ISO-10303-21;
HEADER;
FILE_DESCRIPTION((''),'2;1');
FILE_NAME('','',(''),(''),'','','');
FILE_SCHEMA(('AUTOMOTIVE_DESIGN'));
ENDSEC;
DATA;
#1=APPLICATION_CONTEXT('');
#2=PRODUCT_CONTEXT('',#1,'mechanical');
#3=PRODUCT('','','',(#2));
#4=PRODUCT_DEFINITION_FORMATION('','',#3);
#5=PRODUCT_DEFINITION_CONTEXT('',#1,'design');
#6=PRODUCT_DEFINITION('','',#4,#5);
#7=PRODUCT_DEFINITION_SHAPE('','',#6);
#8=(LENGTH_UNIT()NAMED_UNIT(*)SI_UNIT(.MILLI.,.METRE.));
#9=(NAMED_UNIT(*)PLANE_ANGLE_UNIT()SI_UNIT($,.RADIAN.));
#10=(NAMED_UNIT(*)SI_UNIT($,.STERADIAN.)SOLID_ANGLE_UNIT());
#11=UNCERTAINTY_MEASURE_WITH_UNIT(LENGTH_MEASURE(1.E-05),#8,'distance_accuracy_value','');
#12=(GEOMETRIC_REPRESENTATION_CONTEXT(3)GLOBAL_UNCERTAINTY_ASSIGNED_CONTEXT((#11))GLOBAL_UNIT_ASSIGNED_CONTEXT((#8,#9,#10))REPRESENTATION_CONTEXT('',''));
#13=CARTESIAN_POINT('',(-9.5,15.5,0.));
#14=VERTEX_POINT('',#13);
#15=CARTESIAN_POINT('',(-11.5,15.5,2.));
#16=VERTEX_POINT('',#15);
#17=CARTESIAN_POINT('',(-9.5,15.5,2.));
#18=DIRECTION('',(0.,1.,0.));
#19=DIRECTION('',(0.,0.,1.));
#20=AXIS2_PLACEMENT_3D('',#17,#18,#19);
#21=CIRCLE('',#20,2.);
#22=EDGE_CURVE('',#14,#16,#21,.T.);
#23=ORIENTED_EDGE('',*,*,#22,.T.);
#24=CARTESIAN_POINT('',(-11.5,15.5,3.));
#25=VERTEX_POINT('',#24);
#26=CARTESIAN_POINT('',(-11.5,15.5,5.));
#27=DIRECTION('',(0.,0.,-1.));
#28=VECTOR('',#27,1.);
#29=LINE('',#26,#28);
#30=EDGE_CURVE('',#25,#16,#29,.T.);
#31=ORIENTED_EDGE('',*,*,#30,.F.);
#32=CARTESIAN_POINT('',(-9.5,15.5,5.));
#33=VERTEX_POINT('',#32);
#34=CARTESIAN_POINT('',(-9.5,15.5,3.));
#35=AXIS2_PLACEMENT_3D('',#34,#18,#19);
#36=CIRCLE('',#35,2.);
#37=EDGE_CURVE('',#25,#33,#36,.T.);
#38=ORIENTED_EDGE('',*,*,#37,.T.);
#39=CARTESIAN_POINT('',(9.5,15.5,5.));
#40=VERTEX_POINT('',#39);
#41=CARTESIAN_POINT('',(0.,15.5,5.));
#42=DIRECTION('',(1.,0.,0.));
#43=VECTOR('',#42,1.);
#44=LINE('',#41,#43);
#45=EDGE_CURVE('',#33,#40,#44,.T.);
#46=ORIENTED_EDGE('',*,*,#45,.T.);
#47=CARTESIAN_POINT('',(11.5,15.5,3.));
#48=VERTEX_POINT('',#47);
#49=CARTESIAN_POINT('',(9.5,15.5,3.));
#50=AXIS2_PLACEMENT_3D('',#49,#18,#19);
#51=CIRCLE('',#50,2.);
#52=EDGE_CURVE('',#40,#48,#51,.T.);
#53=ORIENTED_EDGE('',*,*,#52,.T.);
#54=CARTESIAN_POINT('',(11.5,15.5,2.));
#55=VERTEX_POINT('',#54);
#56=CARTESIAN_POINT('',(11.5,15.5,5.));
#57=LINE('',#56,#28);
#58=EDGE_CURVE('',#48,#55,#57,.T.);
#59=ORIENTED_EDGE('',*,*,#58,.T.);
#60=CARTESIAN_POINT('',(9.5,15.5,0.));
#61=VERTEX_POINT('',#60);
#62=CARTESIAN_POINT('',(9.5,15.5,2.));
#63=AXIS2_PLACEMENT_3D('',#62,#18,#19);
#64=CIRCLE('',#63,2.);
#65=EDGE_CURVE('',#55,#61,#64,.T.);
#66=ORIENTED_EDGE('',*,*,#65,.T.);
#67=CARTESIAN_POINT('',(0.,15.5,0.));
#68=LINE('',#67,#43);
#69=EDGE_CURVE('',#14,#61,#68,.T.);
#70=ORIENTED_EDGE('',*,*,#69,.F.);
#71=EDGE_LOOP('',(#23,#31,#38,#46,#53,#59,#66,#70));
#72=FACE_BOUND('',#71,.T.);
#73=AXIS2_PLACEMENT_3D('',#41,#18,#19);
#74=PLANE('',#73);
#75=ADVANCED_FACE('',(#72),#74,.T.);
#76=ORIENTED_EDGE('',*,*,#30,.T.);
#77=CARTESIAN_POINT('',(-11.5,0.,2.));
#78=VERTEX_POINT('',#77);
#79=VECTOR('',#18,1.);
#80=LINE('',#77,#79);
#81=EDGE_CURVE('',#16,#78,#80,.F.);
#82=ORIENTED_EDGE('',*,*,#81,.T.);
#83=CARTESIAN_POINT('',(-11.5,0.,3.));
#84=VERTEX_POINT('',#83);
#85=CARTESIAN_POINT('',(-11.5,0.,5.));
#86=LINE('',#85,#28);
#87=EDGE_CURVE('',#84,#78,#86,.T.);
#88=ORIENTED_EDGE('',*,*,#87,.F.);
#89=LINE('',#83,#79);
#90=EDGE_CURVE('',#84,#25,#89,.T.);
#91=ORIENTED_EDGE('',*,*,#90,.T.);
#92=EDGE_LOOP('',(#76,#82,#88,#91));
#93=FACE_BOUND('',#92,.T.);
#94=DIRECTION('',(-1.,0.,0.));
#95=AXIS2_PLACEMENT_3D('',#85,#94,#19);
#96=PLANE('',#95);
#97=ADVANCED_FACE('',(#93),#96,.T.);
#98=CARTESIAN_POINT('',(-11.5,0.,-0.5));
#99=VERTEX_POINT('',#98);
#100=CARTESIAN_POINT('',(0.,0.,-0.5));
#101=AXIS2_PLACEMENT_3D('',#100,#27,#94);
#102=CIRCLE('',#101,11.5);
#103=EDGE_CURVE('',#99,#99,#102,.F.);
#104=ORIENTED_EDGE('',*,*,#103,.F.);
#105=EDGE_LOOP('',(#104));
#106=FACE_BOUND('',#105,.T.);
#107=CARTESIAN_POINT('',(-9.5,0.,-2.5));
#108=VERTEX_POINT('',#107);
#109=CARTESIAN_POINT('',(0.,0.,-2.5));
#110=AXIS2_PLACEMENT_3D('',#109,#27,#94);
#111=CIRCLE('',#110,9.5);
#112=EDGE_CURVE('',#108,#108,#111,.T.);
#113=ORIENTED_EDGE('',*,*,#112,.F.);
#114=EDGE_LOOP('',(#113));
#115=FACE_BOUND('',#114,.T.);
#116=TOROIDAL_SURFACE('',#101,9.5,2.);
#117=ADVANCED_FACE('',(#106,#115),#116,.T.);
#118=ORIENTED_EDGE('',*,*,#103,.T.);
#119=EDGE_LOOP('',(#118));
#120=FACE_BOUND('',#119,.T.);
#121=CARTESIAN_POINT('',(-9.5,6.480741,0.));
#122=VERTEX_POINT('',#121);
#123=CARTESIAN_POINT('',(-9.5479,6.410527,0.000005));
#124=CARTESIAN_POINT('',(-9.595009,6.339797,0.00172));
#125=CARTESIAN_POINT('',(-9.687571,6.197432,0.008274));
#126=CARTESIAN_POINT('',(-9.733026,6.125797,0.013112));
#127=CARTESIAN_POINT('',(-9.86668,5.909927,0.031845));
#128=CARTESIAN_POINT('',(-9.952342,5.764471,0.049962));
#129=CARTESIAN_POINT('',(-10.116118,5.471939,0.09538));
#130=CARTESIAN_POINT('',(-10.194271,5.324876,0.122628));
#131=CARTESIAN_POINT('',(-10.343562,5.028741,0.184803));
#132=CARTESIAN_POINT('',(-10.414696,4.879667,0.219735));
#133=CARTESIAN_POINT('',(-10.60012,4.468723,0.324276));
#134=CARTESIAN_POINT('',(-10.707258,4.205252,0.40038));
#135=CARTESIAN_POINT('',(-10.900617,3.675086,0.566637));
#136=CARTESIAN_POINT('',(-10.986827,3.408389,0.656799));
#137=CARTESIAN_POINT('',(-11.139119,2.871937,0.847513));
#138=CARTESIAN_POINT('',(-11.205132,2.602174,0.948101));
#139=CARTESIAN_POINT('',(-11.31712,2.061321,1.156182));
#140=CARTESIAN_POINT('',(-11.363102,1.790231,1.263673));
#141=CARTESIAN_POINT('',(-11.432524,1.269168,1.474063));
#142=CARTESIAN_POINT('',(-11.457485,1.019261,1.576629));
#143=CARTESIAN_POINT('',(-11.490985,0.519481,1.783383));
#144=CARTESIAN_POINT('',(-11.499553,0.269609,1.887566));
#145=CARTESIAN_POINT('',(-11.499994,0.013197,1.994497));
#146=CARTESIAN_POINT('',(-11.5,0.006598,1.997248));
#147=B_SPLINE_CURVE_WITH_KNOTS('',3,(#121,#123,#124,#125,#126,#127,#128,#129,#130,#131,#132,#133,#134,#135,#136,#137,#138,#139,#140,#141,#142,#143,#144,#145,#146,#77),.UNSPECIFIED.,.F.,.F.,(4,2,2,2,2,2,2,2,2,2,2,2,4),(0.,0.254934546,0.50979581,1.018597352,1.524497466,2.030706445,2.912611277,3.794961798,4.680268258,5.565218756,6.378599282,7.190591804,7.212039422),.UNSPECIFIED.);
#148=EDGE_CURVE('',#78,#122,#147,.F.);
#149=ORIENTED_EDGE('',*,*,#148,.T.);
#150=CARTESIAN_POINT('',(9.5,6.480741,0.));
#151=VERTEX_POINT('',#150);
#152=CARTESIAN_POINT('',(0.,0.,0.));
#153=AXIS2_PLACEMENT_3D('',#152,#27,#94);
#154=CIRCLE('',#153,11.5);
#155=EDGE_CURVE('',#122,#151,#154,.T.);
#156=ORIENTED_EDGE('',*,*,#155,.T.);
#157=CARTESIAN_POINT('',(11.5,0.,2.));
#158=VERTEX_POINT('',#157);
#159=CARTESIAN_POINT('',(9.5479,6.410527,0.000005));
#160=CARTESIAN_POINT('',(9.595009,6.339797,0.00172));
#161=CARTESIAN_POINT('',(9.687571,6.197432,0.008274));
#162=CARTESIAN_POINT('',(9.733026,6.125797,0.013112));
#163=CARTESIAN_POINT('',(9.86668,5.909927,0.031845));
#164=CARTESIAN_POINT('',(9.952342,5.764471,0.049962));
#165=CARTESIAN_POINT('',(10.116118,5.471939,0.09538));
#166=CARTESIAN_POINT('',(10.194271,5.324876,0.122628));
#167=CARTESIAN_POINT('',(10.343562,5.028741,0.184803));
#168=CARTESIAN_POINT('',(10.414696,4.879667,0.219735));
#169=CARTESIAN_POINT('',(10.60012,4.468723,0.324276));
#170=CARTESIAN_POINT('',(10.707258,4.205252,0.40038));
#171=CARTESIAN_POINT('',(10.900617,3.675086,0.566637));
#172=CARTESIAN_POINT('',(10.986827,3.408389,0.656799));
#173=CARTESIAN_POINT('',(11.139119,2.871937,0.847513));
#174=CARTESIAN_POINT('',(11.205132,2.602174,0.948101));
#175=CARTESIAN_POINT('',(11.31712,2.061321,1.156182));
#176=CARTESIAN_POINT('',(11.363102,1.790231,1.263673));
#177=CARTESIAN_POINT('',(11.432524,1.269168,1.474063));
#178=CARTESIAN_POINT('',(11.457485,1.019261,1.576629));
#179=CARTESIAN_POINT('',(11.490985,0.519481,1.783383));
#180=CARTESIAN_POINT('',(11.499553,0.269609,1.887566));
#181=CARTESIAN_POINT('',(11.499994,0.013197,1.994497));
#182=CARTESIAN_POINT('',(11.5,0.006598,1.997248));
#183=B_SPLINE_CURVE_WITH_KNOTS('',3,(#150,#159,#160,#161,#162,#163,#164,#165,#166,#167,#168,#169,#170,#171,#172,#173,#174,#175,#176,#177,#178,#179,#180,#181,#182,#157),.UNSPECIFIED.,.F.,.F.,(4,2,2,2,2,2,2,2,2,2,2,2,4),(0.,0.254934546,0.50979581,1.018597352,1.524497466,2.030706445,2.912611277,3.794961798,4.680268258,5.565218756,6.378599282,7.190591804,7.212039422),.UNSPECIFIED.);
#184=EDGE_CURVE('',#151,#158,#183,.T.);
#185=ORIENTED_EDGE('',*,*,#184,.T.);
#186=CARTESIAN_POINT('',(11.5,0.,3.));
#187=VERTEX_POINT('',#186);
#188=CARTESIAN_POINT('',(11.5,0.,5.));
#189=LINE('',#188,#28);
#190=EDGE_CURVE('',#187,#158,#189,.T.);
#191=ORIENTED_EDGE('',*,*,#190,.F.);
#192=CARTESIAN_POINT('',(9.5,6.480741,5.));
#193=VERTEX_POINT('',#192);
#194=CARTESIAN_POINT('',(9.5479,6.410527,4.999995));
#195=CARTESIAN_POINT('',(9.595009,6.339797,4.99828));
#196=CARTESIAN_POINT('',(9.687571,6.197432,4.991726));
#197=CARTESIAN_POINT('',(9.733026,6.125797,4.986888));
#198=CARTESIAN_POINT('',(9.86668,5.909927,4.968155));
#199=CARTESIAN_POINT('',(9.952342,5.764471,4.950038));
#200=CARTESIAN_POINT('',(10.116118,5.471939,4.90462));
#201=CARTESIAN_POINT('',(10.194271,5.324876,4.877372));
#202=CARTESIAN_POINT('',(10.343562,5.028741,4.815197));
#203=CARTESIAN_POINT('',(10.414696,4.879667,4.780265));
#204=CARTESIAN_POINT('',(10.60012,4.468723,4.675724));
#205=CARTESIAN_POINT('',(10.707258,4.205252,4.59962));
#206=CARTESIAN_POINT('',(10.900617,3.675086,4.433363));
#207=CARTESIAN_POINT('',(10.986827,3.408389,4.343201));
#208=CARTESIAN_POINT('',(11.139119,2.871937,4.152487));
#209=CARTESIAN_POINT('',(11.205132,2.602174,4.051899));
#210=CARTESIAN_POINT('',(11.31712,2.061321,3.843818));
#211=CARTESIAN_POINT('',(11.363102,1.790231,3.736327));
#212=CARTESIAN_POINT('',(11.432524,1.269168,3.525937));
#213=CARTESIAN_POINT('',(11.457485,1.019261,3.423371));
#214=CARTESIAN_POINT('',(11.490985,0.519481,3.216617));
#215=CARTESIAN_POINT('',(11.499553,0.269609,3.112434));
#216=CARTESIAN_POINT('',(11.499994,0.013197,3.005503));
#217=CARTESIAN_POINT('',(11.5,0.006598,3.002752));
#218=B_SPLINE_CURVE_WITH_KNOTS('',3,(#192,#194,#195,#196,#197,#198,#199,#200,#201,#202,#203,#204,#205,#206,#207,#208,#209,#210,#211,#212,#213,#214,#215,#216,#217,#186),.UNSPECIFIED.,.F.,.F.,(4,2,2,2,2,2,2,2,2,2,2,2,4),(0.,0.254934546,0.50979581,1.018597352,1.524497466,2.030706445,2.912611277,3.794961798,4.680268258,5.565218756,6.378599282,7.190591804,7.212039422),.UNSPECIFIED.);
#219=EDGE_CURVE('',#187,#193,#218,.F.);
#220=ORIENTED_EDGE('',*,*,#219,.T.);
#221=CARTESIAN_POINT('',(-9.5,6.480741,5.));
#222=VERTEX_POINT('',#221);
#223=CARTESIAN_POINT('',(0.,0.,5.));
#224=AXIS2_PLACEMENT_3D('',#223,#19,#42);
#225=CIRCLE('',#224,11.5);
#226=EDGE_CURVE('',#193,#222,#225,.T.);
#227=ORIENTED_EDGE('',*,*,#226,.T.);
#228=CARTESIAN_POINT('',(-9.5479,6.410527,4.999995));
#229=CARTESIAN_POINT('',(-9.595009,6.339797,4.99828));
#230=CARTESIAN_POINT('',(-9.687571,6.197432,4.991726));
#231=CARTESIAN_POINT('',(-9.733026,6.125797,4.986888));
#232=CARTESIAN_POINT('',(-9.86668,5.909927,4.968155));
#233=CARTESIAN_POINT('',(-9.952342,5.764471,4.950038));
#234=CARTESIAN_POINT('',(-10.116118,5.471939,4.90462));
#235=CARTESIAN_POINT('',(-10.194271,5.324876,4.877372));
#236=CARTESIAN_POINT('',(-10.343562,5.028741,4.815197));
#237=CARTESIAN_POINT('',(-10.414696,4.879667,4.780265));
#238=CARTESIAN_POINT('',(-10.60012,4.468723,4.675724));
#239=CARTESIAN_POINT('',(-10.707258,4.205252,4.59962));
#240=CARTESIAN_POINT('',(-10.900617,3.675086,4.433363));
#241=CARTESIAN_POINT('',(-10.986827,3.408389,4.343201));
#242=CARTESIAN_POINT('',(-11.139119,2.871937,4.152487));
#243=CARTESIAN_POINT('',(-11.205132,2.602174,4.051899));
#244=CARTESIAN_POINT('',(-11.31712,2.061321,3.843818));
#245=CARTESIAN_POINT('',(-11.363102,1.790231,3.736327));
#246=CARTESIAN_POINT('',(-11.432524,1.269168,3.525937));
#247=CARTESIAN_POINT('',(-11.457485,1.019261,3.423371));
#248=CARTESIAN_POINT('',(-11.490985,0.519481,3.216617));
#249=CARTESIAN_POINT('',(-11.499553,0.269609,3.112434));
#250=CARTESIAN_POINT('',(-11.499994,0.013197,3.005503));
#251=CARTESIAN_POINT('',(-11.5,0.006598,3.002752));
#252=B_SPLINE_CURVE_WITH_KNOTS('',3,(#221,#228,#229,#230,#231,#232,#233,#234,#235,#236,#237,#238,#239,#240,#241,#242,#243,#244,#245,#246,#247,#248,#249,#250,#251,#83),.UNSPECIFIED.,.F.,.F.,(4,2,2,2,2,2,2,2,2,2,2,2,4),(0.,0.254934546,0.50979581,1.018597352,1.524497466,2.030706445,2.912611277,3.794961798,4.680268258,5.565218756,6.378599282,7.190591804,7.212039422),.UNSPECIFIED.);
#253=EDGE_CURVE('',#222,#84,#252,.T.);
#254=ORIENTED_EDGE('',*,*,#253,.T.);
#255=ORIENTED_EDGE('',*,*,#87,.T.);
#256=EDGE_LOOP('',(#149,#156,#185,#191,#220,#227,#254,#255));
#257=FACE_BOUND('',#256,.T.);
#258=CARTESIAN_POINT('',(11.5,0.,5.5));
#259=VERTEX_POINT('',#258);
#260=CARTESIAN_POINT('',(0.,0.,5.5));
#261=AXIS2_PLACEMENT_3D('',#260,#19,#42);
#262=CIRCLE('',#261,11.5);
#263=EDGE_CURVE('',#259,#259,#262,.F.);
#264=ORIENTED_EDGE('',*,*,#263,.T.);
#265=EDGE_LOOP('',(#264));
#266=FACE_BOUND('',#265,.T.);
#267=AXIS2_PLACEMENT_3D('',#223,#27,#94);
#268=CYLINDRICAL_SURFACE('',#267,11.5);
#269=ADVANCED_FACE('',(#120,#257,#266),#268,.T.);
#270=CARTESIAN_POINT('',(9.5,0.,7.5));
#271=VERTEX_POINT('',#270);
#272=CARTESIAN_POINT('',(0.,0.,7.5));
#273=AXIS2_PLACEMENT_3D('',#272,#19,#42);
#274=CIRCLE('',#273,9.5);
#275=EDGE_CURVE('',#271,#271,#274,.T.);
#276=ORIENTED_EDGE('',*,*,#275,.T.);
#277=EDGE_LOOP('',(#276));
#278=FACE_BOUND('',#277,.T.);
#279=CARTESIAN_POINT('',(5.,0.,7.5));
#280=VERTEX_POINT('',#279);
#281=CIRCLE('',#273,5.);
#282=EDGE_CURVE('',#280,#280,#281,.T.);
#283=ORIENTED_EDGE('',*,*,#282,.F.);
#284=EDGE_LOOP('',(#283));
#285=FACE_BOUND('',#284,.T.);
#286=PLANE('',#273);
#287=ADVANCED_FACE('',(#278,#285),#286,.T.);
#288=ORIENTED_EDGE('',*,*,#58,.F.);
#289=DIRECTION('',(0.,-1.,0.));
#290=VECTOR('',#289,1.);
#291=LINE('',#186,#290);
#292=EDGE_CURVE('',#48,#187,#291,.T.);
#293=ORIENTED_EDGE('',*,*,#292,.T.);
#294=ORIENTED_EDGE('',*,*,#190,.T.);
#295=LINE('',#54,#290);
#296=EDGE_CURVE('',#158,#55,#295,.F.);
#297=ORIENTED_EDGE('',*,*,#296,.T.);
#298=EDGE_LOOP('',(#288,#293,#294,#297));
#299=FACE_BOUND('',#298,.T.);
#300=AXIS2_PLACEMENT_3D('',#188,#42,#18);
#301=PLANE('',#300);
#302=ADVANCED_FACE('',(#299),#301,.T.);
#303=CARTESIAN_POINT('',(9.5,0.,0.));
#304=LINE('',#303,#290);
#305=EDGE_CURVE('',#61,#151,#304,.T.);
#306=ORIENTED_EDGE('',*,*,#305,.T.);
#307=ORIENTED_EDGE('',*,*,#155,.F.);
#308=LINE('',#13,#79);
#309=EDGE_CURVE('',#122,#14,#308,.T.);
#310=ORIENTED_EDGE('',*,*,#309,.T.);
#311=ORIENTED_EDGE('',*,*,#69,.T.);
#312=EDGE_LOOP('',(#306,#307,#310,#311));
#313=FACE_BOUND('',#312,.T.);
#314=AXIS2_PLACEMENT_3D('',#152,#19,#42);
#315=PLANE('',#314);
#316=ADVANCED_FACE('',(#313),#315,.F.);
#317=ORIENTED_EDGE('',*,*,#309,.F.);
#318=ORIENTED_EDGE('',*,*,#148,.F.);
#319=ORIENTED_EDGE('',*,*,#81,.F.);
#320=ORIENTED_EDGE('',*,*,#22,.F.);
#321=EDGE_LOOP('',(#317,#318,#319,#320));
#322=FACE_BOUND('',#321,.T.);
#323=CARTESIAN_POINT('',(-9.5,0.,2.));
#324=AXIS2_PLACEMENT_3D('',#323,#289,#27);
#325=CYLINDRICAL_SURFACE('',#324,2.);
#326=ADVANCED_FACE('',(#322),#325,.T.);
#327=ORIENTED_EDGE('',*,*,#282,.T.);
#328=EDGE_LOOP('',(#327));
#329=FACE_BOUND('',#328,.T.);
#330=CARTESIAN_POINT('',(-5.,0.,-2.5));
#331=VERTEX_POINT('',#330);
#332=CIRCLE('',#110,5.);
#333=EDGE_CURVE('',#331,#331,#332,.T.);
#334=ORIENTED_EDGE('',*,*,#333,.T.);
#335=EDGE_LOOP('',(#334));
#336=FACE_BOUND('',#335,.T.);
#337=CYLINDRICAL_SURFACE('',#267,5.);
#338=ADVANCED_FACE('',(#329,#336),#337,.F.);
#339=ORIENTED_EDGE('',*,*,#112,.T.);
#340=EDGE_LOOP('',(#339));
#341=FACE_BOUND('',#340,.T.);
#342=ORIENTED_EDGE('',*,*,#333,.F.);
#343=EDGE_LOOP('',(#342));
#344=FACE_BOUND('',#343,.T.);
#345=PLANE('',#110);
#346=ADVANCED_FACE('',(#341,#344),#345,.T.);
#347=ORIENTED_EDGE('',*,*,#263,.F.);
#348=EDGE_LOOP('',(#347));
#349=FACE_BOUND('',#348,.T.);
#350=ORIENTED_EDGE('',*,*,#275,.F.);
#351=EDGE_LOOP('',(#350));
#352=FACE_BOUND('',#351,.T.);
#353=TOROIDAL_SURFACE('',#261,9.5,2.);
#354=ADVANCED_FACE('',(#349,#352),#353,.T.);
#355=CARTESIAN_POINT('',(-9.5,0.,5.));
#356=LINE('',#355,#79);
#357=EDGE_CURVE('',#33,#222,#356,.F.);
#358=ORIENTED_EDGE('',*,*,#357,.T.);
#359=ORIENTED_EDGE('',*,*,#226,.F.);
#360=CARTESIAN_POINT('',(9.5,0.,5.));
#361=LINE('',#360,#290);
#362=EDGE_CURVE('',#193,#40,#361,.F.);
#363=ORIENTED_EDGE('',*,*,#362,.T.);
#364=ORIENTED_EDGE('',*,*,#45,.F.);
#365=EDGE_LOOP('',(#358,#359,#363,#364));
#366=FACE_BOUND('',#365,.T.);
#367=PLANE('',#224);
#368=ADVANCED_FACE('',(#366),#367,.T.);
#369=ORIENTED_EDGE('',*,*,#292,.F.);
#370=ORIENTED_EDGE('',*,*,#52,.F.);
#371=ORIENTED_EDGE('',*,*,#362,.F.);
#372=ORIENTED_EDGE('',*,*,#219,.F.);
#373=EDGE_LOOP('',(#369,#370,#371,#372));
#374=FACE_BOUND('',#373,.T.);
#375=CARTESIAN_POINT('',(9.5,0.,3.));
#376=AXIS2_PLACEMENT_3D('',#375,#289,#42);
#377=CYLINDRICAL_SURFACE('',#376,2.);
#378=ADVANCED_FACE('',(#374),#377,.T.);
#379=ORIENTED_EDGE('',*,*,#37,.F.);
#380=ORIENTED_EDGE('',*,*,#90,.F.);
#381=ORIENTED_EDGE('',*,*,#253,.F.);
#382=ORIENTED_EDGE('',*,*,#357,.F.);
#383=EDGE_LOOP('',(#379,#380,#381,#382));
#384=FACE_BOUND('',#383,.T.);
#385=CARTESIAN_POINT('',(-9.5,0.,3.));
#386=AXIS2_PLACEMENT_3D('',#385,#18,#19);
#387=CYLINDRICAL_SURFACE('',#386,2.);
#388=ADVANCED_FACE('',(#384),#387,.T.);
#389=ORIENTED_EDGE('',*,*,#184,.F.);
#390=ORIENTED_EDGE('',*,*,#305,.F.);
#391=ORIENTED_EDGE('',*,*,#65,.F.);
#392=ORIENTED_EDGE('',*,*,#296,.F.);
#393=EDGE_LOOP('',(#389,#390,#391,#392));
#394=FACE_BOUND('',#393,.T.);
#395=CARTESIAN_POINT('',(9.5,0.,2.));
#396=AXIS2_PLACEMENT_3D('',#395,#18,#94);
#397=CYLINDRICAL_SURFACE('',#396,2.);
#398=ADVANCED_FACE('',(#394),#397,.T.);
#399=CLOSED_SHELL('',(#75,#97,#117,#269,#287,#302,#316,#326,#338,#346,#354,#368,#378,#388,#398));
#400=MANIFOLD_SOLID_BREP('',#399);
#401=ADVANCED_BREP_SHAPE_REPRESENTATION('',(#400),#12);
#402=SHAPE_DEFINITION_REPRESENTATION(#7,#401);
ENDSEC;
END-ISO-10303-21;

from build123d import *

# Parameters (mm, degrees)
SKETCH1_R           = 11.5
SKETCH1_R_2         = 5
SKETCH1_W           = 23
SKETCH1_H           = 4
BOSS_EXTRUDE2_DEPTH = 5
SKETCH3_R           = 11.5
BOSS_EXTRUDE3_DEPTH = 2.5
BOSS_EXTRUDE4_START = 2.5
SKETCH4_R           = 11.5
BOSS_EXTRUDE4_DEPTH = 2.5
CUT_EXTRUDE2_START  = -17.5
SKETCH5_R           = 5
CUT_EXTRUDE2_DEPTH  = 17.5
FILLET1_R           = 2


with BuildPart() as part:
    # Sketch1 → Boss-Extrude2 (new body)
    # profile 1 of 4: a face of its own
    with BuildSketch(Plane.XY):
        Circle(SKETCH1_R)
        Circle(SKETCH1_R_2, mode=Mode.SUBTRACT)
    # profile 2 of 4: a face of its own
    with BuildSketch(Plane.XY):
        with BuildLine():
            ThreePointArc((1.6e-08, 11.5), (8.131727989, 8.131727978), (11.5, 0))
            Line((11.5, 0), (11.5, 11.5))
            Line((11.5, 11.5), (1.6e-08, 11.5))
        make_face()
    # profile 3 of 4: a face of its own
    with BuildSketch(Plane.XY):
        with Locations((0, 13.5)):
            Rectangle(SKETCH1_W, SKETCH1_H)
    # profile 4 of 4: a face of its own
    with BuildSketch(Plane.XY):
        with BuildLine():
            Line((-11.5, 11.5), (-11.5, 0))
            ThreePointArc((-11.5, 0), (-8.131727978, 8.131727989), (1.6e-08, 11.5))
            Line((1.6e-08, 11.5), (-11.5, 11.5))
        make_face()
    extrude(amount=BOSS_EXTRUDE2_DEPTH)

    # Sketch3 → Boss-Extrude3 (add)
    with BuildSketch(Plane.XY.offset(5)):
        Circle(SKETCH3_R)
    extrude(amount=BOSS_EXTRUDE3_DEPTH)

    # Sketch4 → Boss-Extrude4 (add)
    with BuildSketch(Plane(origin=(0, 0, 0), x_dir=(-1, 0, 0), z_dir=(0, 0, -1)).offset(BOSS_EXTRUDE4_START)):
        Circle(SKETCH4_R)
    extrude(amount=-BOSS_EXTRUDE4_DEPTH)

    # Sketch5 → Cut-Extrude2 (cut)
    with BuildSketch(Plane.XY.offset(7.5).offset(CUT_EXTRUDE2_START)):
        with Locations(Location((0, 0, 0), (0, 0, 180))):
            Circle(SKETCH5_R)
    extrude(amount=CUT_EXTRUDE2_DEPTH, mode=Mode.SUBTRACT)

    # Fillet1
    # the kernel refuses this fillet: 2 mm, written as the material it takes off along each edge
    with BuildSketch(Plane(origin=(-11.5, 20.5, 0), x_dir=(0, 0, 1), z_dir=(0, -1, 0))) as fillet1_piece_1_section:
        with BuildLine():
            CenterArc((FILLET1_R, -FILLET1_R), FILLET1_R, 90, 90)
            Line((0, -FILLET1_R), (0, 0))
            Line((0, 0), (FILLET1_R, 0))
        make_face()
    fillet1_piece_1 = extrude(amount=25.5, mode=Mode.PRIVATE)
    fillet1_piece_1 = fillet1_piece_1 - Plane(origin=(0, 0, 0.471607453), x_dir=(1, 0, 0), z_dir=(0, 0, -1)) * Cylinder(11.5, 59, mode=Mode.PRIVATE)
    add(fillet1_piece_1, mode=Mode.SUBTRACT)
    with BuildSketch(Plane(origin=(-11.5, 20.5, 5), x_dir=(1, 0, 0), z_dir=(0, -1, 0))) as fillet1_piece_2_section:
        with BuildLine():
            CenterArc((FILLET1_R, -FILLET1_R), FILLET1_R, 90, 90)
            Line((0, -FILLET1_R), (0, 0))
            Line((0, 0), (FILLET1_R, 0))
        make_face()
    fillet1_piece_2 = extrude(amount=25.5, mode=Mode.PRIVATE)
    fillet1_piece_2 = fillet1_piece_2 - Plane(origin=(0, 0, 4.528392342), x_dir=(1, 0, 0), z_dir=(0, 0, -1)) * Cylinder(11.5, 59, mode=Mode.PRIVATE)
    add(fillet1_piece_2, mode=Mode.SUBTRACT)
    with BuildSketch(Plane(origin=(11.5, -5, 0), x_dir=(0, 0, 1), z_dir=(0, 1, 0))) as fillet1_piece_3_section:
        with BuildLine():
            CenterArc((FILLET1_R, -FILLET1_R), FILLET1_R, 90, 90)
            Line((0, -FILLET1_R), (0, 0))
            Line((0, 0), (FILLET1_R, 0))
        make_face()
    fillet1_piece_3 = extrude(amount=25.5, mode=Mode.PRIVATE)
    fillet1_piece_3 = fillet1_piece_3 - Plane(origin=(0, 0, 0.471608914), x_dir=(1, 0, 0), z_dir=(0, 0, -1)) * Cylinder(11.5, 59, mode=Mode.PRIVATE)
    add(fillet1_piece_3, mode=Mode.SUBTRACT)
    with BuildSketch(Plane(origin=(11.5, 20.5, 5), x_dir=(0, 0, -1), z_dir=(0, -1, 0))) as fillet1_piece_4_section:
        with BuildLine():
            CenterArc((FILLET1_R, -FILLET1_R), FILLET1_R, 90, 90)
            Line((0, -FILLET1_R), (0, 0))
            Line((0, 0), (FILLET1_R, 0))
        make_face()
    fillet1_piece_4 = extrude(amount=25.5, mode=Mode.PRIVATE)
    fillet1_piece_4 = fillet1_piece_4 - Plane(origin=(0, 0, 4.528391109), x_dir=(1, 0, 0), z_dir=(0, 0, -1)) * Cylinder(11.5, 59, mode=Mode.PRIVATE)
    add(fillet1_piece_4, mode=Mode.SUBTRACT)
    with BuildSketch(Plane(origin=(0, 0, 7.5), x_dir=(1, 0, 0), z_dir=(0, -1, 0))) as fillet1_piece_5:
        with BuildLine():
            CenterArc((11.5 - FILLET1_R, -FILLET1_R), FILLET1_R, 0, 90)
            Line((11.5 - FILLET1_R, 0), (11.5, 0))
            Line((11.5, 0), (11.5, -FILLET1_R))
        make_face()
    revolve(axis=Axis((0, 0, 7.5), (0, 0, 1)), mode=Mode.SUBTRACT)
    with BuildSketch(Plane(origin=(0, 0, -2.5), x_dir=(-1, 0, 0), z_dir=(0, -1, 0))) as fillet1_piece_6:
        with BuildLine():
            CenterArc((11.5 - FILLET1_R, -FILLET1_R), FILLET1_R, 0, 90)
            Line((11.5 - FILLET1_R, 0), (11.5, 0))
            Line((11.5, 0), (11.5, -FILLET1_R))
        make_face()
    revolve(axis=Axis((0, 0, -2.5), (0, 0, -1)), mode=Mode.SUBTRACT)


solid = part.part
